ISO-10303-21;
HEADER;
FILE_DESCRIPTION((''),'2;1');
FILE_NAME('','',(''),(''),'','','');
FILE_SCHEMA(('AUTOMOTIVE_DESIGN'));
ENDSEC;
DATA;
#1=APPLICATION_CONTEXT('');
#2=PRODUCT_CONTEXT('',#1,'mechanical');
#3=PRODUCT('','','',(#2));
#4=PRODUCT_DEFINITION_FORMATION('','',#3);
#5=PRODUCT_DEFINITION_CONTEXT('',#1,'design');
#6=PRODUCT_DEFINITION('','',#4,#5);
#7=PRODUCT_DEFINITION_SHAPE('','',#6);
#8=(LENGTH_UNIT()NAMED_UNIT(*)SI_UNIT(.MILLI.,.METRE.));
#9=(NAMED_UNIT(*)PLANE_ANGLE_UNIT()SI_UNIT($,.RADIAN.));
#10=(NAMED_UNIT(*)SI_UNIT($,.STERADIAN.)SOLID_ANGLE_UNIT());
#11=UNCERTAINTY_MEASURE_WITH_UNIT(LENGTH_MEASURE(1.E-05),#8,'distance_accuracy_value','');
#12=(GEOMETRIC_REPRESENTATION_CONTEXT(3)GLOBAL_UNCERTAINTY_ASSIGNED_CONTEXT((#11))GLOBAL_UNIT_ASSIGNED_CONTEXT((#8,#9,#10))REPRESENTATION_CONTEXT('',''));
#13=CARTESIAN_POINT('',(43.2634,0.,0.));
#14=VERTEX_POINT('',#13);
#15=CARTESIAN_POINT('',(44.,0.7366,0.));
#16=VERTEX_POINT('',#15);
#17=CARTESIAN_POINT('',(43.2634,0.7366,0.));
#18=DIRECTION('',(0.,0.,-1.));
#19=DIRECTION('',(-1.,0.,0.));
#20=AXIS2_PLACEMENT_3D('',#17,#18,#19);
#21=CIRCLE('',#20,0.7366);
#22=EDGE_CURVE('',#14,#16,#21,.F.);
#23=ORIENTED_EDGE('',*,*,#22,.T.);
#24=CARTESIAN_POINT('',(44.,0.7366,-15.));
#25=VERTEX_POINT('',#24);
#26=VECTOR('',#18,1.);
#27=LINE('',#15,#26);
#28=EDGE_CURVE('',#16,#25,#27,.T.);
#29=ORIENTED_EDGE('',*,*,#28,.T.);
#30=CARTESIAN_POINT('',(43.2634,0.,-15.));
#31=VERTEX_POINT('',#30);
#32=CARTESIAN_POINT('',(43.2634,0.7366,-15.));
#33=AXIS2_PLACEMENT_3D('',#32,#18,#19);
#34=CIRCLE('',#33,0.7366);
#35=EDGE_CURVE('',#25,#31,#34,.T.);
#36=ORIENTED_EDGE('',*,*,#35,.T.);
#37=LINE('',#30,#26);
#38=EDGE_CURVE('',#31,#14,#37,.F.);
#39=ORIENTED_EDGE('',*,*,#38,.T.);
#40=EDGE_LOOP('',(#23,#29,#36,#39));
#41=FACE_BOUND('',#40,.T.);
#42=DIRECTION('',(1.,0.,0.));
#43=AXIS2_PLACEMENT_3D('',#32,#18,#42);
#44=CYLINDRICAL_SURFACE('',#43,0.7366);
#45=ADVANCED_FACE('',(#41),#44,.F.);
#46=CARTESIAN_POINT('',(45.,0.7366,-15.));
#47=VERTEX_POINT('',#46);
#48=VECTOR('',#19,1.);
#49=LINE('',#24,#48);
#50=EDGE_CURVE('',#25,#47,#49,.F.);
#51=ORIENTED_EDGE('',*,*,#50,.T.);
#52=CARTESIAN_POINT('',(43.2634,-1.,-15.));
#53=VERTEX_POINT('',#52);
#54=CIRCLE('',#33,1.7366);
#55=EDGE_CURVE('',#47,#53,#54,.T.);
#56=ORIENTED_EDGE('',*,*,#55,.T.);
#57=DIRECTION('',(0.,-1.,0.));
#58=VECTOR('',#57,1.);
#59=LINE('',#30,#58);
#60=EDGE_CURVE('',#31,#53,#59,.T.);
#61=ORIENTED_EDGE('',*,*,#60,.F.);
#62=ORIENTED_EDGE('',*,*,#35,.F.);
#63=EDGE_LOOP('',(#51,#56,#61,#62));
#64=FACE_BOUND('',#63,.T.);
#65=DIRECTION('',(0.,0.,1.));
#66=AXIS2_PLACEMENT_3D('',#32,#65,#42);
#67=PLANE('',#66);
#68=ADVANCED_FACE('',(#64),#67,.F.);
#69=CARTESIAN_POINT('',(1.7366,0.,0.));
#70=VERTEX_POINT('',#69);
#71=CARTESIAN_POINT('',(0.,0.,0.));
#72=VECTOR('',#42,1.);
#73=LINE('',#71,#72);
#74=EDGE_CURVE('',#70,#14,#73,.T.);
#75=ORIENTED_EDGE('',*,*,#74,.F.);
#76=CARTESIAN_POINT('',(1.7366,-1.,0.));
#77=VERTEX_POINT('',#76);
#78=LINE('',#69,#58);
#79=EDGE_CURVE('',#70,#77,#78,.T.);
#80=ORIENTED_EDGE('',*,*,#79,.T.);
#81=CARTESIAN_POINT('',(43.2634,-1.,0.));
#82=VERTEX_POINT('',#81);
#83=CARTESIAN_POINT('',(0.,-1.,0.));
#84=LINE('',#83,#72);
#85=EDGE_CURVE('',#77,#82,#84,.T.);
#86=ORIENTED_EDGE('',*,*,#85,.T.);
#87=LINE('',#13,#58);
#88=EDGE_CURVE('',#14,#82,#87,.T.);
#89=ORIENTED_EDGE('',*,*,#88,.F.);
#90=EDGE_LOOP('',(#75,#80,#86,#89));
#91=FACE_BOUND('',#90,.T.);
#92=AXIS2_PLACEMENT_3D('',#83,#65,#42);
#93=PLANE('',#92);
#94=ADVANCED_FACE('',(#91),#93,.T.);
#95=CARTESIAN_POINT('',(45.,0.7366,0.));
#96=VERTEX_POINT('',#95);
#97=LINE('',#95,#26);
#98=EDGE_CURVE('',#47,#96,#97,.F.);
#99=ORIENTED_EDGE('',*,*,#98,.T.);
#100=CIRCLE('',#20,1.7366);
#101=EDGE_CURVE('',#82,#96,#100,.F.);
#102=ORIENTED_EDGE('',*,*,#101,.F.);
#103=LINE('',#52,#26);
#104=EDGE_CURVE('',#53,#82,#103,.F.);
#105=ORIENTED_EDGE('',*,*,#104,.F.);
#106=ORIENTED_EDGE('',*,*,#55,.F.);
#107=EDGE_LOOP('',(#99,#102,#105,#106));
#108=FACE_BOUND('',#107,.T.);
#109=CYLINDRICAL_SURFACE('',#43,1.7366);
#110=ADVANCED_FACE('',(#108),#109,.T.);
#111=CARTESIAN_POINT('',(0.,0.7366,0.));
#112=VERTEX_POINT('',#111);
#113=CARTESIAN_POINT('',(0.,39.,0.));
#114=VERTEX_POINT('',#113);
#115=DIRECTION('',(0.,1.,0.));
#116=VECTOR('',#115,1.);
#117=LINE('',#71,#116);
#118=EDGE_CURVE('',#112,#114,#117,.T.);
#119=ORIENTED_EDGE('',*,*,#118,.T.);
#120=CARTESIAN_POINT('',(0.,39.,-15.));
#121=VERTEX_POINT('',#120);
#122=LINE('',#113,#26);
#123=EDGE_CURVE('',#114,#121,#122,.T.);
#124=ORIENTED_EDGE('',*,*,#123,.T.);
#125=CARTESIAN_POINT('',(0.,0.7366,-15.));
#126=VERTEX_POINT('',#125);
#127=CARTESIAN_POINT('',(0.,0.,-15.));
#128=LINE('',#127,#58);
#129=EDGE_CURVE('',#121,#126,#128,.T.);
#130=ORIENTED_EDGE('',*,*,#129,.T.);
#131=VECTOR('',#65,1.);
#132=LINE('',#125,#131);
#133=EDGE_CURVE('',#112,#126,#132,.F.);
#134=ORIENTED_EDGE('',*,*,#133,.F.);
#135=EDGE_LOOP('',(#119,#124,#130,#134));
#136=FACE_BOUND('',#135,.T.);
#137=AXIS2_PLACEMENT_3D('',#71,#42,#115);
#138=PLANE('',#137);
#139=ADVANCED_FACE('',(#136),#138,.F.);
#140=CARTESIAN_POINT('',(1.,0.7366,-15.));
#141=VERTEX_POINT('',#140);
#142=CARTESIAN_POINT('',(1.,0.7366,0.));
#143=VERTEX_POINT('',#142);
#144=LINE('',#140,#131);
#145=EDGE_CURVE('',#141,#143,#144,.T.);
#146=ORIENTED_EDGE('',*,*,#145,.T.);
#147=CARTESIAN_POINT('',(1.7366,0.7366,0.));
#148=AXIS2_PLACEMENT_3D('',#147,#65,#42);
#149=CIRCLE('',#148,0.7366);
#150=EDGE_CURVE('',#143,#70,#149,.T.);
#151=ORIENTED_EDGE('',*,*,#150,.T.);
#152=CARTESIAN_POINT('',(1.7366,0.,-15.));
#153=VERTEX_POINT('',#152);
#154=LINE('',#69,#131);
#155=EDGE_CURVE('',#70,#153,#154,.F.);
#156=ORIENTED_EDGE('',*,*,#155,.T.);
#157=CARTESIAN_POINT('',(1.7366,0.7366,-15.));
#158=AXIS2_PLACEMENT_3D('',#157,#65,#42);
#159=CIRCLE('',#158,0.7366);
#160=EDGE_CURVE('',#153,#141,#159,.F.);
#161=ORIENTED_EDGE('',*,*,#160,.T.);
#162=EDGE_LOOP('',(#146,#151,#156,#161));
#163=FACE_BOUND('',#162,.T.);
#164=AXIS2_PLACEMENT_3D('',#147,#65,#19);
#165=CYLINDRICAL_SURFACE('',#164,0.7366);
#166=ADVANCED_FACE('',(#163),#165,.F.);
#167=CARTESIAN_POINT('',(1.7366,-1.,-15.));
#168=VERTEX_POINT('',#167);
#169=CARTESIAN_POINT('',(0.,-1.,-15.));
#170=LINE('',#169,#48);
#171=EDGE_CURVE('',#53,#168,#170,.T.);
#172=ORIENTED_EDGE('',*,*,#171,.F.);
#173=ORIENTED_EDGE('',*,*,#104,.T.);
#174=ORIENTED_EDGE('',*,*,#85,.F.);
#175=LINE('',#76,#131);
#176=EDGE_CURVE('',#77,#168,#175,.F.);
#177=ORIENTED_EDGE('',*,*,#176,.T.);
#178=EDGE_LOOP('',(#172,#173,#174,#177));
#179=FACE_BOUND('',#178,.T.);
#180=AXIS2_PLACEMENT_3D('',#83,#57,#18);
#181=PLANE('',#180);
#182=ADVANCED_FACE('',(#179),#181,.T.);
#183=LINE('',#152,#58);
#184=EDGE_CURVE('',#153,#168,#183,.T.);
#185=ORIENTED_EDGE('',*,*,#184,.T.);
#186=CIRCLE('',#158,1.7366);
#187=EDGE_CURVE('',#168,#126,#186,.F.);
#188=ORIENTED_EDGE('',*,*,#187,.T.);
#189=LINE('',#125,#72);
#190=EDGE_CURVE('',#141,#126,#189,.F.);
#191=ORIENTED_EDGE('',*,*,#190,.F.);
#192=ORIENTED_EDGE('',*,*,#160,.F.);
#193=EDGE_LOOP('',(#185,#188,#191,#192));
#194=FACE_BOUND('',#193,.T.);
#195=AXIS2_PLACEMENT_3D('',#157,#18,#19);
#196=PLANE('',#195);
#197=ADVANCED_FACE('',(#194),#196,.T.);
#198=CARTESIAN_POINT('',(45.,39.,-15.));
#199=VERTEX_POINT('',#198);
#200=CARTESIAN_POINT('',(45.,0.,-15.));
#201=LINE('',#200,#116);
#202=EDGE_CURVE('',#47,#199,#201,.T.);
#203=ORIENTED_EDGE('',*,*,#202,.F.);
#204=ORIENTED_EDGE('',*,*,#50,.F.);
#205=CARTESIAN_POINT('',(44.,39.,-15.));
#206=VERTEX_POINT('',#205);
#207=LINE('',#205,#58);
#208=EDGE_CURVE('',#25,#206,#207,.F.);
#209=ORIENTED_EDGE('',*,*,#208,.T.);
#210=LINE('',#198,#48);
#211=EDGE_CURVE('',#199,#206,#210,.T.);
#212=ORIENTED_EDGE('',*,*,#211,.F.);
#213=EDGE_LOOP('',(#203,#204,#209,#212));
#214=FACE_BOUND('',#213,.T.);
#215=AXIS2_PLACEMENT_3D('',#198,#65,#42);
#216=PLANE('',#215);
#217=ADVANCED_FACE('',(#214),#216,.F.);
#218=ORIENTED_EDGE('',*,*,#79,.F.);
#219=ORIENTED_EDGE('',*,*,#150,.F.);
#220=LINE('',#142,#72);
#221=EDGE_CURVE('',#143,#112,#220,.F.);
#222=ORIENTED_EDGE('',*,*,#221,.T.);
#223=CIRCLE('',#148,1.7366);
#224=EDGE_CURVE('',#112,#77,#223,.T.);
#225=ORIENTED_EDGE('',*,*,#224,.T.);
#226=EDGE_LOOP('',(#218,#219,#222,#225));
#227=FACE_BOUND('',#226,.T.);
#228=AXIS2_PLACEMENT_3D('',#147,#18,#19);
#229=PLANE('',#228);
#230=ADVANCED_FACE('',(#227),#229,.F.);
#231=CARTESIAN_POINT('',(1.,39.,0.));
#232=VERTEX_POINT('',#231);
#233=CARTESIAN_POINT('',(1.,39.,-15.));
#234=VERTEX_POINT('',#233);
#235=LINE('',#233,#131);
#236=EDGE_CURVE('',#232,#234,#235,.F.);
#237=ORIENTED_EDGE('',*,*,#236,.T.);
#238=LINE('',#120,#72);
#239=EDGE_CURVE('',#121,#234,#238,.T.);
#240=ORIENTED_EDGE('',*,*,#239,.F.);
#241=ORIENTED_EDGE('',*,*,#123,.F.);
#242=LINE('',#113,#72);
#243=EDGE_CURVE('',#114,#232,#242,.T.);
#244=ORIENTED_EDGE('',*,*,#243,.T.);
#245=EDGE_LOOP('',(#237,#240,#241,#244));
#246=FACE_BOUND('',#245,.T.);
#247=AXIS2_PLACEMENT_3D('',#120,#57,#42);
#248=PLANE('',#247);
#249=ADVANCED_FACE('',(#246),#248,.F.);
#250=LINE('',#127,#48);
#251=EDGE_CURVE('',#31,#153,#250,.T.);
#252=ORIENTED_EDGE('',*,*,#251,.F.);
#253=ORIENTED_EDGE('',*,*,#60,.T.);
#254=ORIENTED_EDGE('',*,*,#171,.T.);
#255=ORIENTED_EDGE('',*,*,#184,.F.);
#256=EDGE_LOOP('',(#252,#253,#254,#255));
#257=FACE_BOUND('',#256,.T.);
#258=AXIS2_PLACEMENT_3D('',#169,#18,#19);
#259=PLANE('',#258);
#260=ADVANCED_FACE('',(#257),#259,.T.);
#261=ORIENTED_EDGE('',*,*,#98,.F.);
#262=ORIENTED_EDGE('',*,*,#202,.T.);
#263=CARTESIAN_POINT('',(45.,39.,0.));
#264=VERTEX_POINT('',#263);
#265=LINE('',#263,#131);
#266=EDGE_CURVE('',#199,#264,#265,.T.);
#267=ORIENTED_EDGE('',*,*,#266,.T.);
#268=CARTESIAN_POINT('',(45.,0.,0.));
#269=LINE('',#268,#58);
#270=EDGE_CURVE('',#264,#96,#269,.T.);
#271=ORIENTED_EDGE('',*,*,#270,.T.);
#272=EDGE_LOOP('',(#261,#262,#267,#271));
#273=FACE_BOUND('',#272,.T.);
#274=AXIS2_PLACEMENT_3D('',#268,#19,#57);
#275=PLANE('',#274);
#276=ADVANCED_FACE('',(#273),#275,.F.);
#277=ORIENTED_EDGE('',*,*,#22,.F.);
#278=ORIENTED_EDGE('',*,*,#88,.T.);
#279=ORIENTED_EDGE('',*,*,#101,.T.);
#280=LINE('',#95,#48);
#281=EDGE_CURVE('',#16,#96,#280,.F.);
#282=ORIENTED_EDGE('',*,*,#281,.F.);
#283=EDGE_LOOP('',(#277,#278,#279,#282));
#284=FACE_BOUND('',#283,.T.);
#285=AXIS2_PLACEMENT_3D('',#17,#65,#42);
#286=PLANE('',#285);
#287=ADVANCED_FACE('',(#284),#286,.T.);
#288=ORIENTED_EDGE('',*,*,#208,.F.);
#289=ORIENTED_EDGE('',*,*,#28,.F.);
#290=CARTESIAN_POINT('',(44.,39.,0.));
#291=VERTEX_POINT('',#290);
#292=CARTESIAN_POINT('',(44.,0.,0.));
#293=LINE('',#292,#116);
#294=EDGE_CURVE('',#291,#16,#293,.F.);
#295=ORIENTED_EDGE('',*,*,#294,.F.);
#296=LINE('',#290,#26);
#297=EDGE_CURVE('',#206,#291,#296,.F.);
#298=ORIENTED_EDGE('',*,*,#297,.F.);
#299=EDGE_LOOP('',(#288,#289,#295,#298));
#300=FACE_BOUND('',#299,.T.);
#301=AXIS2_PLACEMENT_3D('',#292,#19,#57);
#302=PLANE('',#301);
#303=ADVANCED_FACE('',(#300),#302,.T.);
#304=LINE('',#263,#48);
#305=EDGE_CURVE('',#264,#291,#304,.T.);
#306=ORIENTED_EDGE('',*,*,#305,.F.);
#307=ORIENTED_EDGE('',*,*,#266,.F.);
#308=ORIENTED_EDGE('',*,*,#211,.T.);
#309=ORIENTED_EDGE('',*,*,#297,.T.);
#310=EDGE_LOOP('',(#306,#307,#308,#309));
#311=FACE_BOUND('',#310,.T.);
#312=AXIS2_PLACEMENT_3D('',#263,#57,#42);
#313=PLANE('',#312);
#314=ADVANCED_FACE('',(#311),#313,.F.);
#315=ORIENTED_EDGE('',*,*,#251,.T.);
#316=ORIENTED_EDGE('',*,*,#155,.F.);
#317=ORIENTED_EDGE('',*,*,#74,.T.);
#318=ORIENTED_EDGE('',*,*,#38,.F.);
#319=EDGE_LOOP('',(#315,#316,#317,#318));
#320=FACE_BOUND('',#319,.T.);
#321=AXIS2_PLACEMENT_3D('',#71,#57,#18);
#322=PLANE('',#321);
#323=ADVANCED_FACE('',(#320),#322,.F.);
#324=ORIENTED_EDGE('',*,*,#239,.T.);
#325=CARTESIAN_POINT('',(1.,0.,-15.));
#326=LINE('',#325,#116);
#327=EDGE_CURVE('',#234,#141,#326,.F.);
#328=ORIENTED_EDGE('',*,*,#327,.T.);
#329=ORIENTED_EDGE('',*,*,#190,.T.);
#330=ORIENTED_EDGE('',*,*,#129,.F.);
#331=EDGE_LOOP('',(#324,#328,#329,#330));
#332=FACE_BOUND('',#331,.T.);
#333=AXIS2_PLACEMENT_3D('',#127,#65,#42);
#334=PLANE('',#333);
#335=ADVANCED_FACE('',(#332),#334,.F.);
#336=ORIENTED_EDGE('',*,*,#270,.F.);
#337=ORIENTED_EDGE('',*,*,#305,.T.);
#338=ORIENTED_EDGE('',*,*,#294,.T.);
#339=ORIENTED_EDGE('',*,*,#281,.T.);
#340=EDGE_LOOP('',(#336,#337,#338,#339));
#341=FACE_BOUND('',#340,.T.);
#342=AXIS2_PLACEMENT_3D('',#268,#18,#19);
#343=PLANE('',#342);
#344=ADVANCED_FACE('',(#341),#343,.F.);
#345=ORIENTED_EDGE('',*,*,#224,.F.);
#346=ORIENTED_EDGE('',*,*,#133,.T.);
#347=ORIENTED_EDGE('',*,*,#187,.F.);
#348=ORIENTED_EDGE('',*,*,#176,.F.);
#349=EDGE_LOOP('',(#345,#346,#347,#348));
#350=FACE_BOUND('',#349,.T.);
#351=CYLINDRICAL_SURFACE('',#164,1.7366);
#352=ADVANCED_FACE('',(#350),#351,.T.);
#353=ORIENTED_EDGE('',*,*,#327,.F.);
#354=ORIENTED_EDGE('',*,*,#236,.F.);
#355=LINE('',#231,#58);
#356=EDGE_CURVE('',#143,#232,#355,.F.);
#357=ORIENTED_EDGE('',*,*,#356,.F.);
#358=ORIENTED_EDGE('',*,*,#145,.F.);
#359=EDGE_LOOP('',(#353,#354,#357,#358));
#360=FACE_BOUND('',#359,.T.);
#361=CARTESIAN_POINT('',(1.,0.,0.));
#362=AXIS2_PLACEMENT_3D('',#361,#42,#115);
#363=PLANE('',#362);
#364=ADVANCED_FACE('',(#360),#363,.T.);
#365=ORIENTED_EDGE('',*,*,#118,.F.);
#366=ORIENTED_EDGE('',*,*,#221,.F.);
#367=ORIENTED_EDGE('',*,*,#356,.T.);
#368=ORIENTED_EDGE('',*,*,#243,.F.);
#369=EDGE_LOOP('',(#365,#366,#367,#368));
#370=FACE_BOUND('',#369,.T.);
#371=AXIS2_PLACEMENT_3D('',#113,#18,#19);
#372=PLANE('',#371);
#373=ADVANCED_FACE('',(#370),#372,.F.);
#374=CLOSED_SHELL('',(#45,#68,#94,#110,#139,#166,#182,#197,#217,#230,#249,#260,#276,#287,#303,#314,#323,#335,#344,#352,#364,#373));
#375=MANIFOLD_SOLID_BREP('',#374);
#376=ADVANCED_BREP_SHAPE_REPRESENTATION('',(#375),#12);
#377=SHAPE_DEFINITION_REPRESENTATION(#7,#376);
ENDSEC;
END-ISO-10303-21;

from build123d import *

# Parameters (mm, degrees)
SKETCH_1_W                       = 45
SKETCH_1_H                       = 15
SM_BASE_FLANGE_1_DEPTH           = 1
SM_EDGE_FLANGE_1_STRIP_W         = 5.4732
SM_EDGE_FLANGE_1_STRIP_H         = 1
SM_EDGE_FLANGE_1_STRIP_CUT_DEPTH = 15
SM_EDGE_FLANGE_1_DEPTH           = 15
SM_EDGE_FLANGE_2_STRIP_W         = 5.4732
SM_EDGE_FLANGE_2_STRIP_H         = 1
SM_EDGE_FLANGE_2_STRIP_CUT_DEPTH = 15
SM_EDGE_FLANGE_2_DEPTH           = 15


# Sheet-metal steps are written as plain solids
with BuildPart() as part:
    # Sketch 1 → Базовая кромка1 (new body)
    with BuildSketch(Plane(origin=(0, 0, 0), x_dir=(1, 0, 0), z_dir=(0, 1, 0))):
        with Locations((22.5, 7.5)):
            Rectangle(SKETCH_1_W, SKETCH_1_H)
    extrude(amount=-SM_BASE_FLANGE_1_DEPTH)

    # Ребро-кромка1 strip (across the edge) → Ребро-кромка1 strip cut (cut)
    with BuildSketch(Plane.XY.offset(-15)):
        with Locations((-1, -0.5)):
            Rectangle(SM_EDGE_FLANGE_1_STRIP_W, SM_EDGE_FLANGE_1_STRIP_H)
    extrude(amount=SM_EDGE_FLANGE_1_STRIP_CUT_DEPTH, mode=Mode.SUBTRACT)

    # Ребро-кромка1 section (across the edge) → Ребро-кромка1 (add)
    with BuildSketch(Plane.XY.offset(-15)):
        with BuildLine():
            Line((0, 0.7366), (0, 39))
            Line((0, 39), (1, 39))
            Line((1, 39), (1, 0.7366))
            ThreePointArc((1, 0.7366), (1.215745145, 0.215745145), (1.7366, 0))
            Line((1.7366, 0), (1.7366, -1))
            ThreePointArc((1.7366, -1), (0.508638364, -0.491361636), (0, 0.7366))
        make_face()
    extrude(amount=SM_EDGE_FLANGE_1_DEPTH)

    # Ребро-кромка2 strip (across the edge) → Ребро-кромка2 strip cut (cut)
    with BuildSketch(Plane(origin=(45, 0, 0), x_dir=(-1, 0, 0), z_dir=(0, 0, -1))):
        with Locations((-1, -0.5)):
            Rectangle(SM_EDGE_FLANGE_2_STRIP_W, SM_EDGE_FLANGE_2_STRIP_H)
    extrude(amount=SM_EDGE_FLANGE_2_STRIP_CUT_DEPTH, mode=Mode.SUBTRACT)

    # Ребро-кромка2 section (across the edge) → Ребро-кромка2 (add)
    with BuildSketch(Plane(origin=(45, 0, 0), x_dir=(-1, 0, 0), z_dir=(0, 0, -1))):
        with BuildLine():
            Line((0, 0.7366), (0, 39))
            Line((0, 39), (1, 39))
            Line((1, 39), (1, 0.7366))
            ThreePointArc((1, 0.7366), (1.215745145, 0.215745145), (1.7366, 0))
            Line((1.7366, 0), (1.7366, -1))
            ThreePointArc((1.7366, -1), (0.508638364, -0.491361636), (0, 0.7366))
        make_face()
    extrude(amount=SM_EDGE_FLANGE_2_DEPTH)


solid = part.part
